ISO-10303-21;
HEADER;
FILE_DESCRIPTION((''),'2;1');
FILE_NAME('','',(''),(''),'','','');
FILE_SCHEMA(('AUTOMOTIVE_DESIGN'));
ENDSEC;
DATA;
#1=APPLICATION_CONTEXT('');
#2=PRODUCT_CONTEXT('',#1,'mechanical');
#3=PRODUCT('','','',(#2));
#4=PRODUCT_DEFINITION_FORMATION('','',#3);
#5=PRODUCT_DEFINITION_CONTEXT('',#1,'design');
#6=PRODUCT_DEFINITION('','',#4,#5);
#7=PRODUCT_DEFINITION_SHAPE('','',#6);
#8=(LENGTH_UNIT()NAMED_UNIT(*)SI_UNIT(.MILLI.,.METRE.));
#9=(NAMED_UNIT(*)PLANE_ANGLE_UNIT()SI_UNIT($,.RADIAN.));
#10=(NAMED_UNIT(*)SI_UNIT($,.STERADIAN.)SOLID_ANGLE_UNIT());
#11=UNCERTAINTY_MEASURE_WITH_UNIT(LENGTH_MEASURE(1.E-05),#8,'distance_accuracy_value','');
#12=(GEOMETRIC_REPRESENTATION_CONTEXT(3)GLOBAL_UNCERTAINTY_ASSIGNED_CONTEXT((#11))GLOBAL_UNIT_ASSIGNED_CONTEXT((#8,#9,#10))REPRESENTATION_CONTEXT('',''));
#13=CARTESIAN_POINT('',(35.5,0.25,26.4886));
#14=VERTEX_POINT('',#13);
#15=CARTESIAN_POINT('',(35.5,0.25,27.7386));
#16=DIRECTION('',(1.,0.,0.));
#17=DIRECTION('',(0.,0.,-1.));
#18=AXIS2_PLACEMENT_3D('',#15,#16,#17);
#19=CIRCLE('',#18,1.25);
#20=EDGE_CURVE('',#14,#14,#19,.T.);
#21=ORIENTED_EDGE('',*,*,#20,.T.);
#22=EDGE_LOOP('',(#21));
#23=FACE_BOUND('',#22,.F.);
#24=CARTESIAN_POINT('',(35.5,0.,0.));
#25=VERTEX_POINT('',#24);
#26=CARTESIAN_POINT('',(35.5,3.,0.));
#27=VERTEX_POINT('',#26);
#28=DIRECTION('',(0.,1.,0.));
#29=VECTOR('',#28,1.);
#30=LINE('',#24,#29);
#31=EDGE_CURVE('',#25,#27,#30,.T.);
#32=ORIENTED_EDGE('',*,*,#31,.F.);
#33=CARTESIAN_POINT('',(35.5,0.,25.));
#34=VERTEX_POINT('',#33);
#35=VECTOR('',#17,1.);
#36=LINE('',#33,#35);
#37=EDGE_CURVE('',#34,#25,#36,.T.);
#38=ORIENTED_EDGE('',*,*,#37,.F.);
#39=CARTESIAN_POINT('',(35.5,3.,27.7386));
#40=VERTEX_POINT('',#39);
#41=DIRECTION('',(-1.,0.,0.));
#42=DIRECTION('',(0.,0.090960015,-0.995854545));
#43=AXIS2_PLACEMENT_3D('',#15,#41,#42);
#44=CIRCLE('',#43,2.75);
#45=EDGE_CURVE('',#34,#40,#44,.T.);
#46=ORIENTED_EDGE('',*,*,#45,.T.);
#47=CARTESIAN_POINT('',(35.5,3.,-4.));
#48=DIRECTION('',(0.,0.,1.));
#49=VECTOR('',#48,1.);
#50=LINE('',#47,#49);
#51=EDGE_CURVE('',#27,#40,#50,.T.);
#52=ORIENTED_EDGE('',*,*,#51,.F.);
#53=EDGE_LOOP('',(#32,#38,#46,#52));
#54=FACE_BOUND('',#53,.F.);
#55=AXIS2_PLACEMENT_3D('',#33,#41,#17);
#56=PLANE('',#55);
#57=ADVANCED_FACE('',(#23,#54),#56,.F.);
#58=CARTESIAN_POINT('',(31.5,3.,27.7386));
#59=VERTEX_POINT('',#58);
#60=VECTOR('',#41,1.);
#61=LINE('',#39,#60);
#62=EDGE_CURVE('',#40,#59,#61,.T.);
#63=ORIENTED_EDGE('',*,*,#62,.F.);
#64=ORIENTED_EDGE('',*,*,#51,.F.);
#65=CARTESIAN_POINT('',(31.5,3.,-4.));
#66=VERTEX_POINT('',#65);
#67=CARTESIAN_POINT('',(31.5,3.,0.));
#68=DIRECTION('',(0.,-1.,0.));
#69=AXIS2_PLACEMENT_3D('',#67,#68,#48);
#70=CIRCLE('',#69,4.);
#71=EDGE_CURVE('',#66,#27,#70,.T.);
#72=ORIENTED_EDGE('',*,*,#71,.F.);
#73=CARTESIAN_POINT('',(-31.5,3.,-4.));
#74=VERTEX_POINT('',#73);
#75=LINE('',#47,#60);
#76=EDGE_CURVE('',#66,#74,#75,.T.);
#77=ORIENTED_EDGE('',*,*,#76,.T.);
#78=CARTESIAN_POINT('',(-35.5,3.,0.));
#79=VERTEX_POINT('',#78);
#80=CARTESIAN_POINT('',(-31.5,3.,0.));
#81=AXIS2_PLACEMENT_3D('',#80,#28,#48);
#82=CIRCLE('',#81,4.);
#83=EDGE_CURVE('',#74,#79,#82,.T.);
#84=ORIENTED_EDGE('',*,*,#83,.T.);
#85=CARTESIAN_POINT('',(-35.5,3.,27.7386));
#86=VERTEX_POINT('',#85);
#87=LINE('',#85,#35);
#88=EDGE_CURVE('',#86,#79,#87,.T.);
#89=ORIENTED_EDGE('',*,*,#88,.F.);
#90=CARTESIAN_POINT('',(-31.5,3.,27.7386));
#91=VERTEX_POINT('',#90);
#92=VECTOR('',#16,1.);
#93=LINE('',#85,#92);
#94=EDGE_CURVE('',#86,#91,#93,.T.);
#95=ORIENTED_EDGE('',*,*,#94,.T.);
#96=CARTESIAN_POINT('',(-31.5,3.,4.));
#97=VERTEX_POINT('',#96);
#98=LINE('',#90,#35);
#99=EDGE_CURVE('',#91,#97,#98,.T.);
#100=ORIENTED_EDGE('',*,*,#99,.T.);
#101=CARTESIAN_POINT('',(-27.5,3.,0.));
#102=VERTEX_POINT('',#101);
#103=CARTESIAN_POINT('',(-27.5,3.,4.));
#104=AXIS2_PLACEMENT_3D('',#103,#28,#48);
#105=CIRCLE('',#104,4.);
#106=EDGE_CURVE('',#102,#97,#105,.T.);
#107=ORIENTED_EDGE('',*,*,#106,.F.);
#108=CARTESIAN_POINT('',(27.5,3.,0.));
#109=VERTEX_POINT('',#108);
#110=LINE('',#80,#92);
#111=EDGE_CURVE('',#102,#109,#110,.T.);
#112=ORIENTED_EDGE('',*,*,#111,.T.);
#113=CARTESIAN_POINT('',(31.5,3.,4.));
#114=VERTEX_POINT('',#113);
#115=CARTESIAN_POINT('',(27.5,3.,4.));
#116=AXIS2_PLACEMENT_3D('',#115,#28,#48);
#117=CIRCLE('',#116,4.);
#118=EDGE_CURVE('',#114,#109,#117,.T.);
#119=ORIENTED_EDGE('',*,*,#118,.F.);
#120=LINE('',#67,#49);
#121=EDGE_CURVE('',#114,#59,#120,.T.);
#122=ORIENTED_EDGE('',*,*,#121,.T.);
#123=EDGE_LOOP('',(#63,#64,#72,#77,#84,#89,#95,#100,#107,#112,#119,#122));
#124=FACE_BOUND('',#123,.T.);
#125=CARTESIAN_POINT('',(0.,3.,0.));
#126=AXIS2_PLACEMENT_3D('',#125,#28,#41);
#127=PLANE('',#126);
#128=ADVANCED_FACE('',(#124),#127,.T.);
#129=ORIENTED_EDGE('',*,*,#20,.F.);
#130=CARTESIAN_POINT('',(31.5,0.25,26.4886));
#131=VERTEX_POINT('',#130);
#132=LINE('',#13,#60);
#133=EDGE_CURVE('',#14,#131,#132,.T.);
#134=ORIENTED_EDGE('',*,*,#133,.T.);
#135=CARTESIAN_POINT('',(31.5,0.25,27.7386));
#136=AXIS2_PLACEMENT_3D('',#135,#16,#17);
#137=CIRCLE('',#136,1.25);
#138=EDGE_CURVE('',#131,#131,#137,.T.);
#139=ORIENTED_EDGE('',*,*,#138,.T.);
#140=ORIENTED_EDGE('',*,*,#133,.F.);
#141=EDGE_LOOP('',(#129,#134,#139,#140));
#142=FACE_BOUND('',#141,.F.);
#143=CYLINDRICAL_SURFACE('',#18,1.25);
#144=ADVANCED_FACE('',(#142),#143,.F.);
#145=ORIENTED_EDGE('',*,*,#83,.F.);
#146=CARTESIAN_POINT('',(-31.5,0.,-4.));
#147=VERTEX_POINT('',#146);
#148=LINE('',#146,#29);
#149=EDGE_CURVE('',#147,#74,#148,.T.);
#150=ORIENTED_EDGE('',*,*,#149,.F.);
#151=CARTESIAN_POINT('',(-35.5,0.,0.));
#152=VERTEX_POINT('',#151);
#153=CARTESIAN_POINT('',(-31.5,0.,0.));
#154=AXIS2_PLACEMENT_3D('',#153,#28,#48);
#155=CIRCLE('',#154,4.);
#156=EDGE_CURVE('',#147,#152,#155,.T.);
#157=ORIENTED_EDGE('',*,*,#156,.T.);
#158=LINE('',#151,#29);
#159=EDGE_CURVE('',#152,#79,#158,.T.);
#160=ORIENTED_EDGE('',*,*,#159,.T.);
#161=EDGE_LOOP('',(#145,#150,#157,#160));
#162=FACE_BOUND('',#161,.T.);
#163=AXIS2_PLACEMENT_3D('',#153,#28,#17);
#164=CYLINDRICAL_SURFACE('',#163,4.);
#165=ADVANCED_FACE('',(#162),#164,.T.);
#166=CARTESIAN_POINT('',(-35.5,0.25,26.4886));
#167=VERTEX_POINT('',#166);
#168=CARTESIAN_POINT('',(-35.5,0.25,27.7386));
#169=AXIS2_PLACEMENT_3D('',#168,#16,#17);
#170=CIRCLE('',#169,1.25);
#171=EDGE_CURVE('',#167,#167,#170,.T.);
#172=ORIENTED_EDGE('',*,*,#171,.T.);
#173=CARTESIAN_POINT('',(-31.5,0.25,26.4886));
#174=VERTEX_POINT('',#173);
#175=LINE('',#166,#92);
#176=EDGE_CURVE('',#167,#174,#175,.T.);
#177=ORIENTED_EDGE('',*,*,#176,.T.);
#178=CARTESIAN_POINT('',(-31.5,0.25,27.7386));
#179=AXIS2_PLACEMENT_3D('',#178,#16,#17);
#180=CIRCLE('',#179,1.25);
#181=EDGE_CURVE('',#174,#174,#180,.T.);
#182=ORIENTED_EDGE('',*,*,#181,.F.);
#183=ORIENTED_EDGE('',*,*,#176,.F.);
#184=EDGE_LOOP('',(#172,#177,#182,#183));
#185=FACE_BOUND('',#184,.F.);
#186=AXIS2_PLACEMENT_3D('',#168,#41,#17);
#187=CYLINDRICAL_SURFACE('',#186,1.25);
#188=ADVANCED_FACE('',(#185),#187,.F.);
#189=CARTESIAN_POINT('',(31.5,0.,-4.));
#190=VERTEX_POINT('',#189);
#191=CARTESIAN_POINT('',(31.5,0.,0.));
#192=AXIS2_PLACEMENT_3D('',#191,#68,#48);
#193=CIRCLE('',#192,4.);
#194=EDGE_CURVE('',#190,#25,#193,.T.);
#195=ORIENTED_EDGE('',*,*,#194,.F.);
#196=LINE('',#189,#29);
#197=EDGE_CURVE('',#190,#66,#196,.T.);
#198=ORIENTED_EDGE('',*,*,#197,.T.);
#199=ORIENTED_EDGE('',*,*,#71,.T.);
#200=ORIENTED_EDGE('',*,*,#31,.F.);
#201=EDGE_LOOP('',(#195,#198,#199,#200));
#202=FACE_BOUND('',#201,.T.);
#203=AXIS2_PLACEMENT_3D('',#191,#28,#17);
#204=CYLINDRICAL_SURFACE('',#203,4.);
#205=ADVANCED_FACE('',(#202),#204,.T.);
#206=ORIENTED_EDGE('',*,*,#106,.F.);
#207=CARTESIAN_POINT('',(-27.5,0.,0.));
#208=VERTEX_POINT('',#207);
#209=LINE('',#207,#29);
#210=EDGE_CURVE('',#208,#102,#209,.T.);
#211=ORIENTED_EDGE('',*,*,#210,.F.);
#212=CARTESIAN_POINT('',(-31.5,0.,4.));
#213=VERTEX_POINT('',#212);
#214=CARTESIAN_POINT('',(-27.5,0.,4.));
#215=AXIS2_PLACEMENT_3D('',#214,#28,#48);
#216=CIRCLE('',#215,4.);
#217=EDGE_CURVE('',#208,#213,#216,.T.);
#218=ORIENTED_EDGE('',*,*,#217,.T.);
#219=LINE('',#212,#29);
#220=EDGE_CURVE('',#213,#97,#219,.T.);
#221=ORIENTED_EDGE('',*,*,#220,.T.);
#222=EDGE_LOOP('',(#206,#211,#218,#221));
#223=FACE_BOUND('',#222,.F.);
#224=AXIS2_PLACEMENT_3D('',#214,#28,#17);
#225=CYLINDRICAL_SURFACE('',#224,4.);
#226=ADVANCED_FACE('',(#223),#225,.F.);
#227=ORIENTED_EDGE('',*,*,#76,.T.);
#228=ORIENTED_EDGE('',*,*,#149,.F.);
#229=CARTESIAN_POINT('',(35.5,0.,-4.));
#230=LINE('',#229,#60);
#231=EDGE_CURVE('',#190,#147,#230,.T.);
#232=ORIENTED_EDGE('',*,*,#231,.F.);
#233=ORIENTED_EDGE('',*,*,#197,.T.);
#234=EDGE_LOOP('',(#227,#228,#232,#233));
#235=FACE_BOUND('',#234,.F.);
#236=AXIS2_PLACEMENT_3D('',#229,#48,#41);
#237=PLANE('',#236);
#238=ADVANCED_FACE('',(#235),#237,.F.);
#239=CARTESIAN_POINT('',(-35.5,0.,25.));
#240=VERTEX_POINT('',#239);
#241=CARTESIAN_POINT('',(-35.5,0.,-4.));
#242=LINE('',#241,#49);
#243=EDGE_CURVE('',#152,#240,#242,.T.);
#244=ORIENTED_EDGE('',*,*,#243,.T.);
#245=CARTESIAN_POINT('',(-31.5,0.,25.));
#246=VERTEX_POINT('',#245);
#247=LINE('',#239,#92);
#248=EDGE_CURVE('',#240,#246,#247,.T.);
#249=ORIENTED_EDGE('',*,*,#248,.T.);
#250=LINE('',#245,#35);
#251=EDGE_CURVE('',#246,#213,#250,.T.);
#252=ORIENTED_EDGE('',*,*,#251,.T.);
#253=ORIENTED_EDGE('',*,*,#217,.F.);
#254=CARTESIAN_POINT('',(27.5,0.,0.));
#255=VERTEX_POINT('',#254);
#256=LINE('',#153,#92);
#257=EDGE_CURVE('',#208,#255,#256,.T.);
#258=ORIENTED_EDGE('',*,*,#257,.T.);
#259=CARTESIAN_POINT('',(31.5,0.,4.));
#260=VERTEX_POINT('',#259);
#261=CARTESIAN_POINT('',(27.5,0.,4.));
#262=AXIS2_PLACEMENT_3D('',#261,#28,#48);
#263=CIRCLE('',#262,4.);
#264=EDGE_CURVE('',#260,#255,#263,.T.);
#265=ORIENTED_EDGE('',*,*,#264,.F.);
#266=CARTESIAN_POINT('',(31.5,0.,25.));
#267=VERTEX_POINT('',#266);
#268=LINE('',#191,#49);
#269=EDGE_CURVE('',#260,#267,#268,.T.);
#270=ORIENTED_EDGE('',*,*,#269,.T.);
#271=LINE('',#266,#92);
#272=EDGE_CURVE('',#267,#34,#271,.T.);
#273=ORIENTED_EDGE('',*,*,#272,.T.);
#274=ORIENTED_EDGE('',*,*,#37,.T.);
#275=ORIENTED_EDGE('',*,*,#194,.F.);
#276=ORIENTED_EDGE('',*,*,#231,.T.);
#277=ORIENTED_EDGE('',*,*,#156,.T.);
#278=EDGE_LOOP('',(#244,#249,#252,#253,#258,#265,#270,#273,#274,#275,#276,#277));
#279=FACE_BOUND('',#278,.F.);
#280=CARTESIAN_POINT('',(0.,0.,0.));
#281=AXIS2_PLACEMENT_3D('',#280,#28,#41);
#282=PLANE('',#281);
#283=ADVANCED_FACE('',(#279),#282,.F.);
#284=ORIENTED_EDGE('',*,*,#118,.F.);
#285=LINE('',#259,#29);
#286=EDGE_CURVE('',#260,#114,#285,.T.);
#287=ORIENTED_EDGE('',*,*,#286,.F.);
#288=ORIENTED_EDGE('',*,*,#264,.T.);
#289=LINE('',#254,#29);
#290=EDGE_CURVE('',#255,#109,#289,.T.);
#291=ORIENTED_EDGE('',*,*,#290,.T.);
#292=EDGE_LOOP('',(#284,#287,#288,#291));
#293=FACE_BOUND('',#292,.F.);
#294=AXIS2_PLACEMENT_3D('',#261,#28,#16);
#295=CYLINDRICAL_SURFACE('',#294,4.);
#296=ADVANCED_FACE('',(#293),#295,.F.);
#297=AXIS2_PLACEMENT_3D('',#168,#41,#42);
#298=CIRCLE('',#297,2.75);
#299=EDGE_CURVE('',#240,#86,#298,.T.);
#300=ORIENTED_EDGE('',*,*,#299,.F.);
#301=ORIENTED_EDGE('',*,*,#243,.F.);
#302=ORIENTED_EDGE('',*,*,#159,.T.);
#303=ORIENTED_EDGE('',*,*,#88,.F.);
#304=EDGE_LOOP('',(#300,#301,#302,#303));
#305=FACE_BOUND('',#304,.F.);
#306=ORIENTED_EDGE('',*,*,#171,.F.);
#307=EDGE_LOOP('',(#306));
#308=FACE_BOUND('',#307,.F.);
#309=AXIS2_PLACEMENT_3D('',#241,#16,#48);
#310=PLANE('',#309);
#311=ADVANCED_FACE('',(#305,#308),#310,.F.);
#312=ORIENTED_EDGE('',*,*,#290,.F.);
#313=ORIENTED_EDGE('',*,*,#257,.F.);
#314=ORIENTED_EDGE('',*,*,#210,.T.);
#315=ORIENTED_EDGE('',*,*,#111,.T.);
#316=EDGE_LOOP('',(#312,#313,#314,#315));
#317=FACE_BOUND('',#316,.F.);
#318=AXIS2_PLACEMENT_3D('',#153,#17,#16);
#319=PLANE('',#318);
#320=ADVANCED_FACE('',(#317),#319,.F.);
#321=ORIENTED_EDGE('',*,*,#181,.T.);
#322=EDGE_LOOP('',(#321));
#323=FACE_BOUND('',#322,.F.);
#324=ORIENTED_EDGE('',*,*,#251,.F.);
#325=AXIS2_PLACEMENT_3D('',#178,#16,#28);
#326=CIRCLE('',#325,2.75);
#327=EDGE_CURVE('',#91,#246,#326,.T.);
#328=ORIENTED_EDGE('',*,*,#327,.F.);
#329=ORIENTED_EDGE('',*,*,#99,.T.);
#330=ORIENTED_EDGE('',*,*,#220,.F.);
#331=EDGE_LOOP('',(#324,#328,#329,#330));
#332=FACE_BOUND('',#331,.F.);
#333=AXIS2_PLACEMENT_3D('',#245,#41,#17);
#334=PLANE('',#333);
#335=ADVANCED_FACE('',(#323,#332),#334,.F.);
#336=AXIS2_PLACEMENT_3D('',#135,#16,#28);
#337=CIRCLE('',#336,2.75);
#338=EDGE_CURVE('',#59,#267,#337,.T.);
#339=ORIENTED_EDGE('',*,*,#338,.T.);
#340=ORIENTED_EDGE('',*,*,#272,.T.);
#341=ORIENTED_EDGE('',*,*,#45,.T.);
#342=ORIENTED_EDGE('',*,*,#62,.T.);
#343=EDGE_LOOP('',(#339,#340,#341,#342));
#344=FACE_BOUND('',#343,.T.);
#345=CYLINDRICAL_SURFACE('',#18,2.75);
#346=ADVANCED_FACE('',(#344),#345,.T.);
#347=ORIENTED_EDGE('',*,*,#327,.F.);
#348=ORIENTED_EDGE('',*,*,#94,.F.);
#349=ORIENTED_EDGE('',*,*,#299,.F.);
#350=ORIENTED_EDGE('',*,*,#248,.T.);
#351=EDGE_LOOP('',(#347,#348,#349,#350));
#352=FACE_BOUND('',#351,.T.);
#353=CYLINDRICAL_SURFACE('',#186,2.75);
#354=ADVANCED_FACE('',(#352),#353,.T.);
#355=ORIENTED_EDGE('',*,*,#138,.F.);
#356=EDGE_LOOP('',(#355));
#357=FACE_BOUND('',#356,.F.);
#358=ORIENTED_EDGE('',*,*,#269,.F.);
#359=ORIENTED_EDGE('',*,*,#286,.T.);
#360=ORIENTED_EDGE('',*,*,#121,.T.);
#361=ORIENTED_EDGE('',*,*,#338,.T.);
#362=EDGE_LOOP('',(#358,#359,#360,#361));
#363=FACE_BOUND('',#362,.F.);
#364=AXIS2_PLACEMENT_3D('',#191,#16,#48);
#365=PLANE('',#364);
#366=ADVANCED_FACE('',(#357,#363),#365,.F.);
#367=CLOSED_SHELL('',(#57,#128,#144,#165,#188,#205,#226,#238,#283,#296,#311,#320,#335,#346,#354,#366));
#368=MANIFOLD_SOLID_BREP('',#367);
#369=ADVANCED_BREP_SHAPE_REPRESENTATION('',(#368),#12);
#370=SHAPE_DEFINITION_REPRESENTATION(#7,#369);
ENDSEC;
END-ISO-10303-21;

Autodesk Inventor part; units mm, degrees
ref_plane "XZ Plane" through (0, 0, 0) normal (0, 1, 0) x (-1, 0, 0)
ref_plane "XY Plane" through (0, 0, 0) normal (0, 0, 1) x (1, 0, 0)
sketch "Sketch2" plane through (0, 0, 0) normal (0, 1, 0) x (-1, 0, 0)
  line L0 (35.5, -4) -> (35.5, 25)
  line L1 (35.5, 25) -> (31.5, 25)
  line L2 (31.5, 25) -> (31.5, 0)
  line L3 (31.5, 0) -> (-31.5, 0)
  line L4 (-31.5, 0) -> (-31.5, 25)
  line L5 (-31.5, 25) -> (-35.5, 25)
  line L6 (-35.5, 25) -> (-35.5, -4)
  line L7 (-35.5, -4) -> (35.5, -4)
  line L8 (0, -9.8) -> (0, 30.8) construction
  line L9 (-49.7, 0) -> (49.7, 0) construction
  point P0 (0, 0)
  dimension "d0" = 4
  dimension "d1" = 25
  dimension "d2" = 71
  dimension "d3" = 4
extrude "Extrusion1" add sketch "Sketch2" along normal blind 3
sketch "Sketch3" plane through (35.5, 0, 25) normal (1, 0, 0) x (0, 0, -1)
  line L0 (0, 0) -> (0, 3) construction
  line L1 (0, 0) -> (0, 3) construction
  line L2 (0, 0.25) -> (-2.7386, 0.25) construction
  circle A0 centre (-2.7386, 0.25) radius 1.25
  circle A1 centre (-2.7386, 0.25) radius 2.75
  line L3 (0, 0) -> (29, 0) construction
  line L4 (0, 3) -> (29, 3) construction
  line L5 (29, 3) -> (0, 3) construction
  line L6 (-2.7386, 3) -> (0, 3) construction
  line L7 (-2.7386, 3) -> (-2.7386, 0.25) construction
  line L8 (-2.7386, 3) -> (0, 3)
  line L9 (0, 0) -> (0, 3)
  point P0 (25, 0)
  dimension "d6" = 2.5
  dimension "d7" = 1.5
extrude "Extrusion2" add sketch "Sketch3" against normal up to surface (4 mm away)
mirror "Mirror1" about plane through (0, 0, 0) normal (1, 0, 0) of "Extrusion2"
fillet "Fillet1" radius 4 4 edges at (-35.5, 1.5, -4) (-31.5, 1.5, 0) (31.5, 1.5, 0) (35.5, 1.5, -4)
equation "\"d3\" = d0"
properties part number "back_support"
